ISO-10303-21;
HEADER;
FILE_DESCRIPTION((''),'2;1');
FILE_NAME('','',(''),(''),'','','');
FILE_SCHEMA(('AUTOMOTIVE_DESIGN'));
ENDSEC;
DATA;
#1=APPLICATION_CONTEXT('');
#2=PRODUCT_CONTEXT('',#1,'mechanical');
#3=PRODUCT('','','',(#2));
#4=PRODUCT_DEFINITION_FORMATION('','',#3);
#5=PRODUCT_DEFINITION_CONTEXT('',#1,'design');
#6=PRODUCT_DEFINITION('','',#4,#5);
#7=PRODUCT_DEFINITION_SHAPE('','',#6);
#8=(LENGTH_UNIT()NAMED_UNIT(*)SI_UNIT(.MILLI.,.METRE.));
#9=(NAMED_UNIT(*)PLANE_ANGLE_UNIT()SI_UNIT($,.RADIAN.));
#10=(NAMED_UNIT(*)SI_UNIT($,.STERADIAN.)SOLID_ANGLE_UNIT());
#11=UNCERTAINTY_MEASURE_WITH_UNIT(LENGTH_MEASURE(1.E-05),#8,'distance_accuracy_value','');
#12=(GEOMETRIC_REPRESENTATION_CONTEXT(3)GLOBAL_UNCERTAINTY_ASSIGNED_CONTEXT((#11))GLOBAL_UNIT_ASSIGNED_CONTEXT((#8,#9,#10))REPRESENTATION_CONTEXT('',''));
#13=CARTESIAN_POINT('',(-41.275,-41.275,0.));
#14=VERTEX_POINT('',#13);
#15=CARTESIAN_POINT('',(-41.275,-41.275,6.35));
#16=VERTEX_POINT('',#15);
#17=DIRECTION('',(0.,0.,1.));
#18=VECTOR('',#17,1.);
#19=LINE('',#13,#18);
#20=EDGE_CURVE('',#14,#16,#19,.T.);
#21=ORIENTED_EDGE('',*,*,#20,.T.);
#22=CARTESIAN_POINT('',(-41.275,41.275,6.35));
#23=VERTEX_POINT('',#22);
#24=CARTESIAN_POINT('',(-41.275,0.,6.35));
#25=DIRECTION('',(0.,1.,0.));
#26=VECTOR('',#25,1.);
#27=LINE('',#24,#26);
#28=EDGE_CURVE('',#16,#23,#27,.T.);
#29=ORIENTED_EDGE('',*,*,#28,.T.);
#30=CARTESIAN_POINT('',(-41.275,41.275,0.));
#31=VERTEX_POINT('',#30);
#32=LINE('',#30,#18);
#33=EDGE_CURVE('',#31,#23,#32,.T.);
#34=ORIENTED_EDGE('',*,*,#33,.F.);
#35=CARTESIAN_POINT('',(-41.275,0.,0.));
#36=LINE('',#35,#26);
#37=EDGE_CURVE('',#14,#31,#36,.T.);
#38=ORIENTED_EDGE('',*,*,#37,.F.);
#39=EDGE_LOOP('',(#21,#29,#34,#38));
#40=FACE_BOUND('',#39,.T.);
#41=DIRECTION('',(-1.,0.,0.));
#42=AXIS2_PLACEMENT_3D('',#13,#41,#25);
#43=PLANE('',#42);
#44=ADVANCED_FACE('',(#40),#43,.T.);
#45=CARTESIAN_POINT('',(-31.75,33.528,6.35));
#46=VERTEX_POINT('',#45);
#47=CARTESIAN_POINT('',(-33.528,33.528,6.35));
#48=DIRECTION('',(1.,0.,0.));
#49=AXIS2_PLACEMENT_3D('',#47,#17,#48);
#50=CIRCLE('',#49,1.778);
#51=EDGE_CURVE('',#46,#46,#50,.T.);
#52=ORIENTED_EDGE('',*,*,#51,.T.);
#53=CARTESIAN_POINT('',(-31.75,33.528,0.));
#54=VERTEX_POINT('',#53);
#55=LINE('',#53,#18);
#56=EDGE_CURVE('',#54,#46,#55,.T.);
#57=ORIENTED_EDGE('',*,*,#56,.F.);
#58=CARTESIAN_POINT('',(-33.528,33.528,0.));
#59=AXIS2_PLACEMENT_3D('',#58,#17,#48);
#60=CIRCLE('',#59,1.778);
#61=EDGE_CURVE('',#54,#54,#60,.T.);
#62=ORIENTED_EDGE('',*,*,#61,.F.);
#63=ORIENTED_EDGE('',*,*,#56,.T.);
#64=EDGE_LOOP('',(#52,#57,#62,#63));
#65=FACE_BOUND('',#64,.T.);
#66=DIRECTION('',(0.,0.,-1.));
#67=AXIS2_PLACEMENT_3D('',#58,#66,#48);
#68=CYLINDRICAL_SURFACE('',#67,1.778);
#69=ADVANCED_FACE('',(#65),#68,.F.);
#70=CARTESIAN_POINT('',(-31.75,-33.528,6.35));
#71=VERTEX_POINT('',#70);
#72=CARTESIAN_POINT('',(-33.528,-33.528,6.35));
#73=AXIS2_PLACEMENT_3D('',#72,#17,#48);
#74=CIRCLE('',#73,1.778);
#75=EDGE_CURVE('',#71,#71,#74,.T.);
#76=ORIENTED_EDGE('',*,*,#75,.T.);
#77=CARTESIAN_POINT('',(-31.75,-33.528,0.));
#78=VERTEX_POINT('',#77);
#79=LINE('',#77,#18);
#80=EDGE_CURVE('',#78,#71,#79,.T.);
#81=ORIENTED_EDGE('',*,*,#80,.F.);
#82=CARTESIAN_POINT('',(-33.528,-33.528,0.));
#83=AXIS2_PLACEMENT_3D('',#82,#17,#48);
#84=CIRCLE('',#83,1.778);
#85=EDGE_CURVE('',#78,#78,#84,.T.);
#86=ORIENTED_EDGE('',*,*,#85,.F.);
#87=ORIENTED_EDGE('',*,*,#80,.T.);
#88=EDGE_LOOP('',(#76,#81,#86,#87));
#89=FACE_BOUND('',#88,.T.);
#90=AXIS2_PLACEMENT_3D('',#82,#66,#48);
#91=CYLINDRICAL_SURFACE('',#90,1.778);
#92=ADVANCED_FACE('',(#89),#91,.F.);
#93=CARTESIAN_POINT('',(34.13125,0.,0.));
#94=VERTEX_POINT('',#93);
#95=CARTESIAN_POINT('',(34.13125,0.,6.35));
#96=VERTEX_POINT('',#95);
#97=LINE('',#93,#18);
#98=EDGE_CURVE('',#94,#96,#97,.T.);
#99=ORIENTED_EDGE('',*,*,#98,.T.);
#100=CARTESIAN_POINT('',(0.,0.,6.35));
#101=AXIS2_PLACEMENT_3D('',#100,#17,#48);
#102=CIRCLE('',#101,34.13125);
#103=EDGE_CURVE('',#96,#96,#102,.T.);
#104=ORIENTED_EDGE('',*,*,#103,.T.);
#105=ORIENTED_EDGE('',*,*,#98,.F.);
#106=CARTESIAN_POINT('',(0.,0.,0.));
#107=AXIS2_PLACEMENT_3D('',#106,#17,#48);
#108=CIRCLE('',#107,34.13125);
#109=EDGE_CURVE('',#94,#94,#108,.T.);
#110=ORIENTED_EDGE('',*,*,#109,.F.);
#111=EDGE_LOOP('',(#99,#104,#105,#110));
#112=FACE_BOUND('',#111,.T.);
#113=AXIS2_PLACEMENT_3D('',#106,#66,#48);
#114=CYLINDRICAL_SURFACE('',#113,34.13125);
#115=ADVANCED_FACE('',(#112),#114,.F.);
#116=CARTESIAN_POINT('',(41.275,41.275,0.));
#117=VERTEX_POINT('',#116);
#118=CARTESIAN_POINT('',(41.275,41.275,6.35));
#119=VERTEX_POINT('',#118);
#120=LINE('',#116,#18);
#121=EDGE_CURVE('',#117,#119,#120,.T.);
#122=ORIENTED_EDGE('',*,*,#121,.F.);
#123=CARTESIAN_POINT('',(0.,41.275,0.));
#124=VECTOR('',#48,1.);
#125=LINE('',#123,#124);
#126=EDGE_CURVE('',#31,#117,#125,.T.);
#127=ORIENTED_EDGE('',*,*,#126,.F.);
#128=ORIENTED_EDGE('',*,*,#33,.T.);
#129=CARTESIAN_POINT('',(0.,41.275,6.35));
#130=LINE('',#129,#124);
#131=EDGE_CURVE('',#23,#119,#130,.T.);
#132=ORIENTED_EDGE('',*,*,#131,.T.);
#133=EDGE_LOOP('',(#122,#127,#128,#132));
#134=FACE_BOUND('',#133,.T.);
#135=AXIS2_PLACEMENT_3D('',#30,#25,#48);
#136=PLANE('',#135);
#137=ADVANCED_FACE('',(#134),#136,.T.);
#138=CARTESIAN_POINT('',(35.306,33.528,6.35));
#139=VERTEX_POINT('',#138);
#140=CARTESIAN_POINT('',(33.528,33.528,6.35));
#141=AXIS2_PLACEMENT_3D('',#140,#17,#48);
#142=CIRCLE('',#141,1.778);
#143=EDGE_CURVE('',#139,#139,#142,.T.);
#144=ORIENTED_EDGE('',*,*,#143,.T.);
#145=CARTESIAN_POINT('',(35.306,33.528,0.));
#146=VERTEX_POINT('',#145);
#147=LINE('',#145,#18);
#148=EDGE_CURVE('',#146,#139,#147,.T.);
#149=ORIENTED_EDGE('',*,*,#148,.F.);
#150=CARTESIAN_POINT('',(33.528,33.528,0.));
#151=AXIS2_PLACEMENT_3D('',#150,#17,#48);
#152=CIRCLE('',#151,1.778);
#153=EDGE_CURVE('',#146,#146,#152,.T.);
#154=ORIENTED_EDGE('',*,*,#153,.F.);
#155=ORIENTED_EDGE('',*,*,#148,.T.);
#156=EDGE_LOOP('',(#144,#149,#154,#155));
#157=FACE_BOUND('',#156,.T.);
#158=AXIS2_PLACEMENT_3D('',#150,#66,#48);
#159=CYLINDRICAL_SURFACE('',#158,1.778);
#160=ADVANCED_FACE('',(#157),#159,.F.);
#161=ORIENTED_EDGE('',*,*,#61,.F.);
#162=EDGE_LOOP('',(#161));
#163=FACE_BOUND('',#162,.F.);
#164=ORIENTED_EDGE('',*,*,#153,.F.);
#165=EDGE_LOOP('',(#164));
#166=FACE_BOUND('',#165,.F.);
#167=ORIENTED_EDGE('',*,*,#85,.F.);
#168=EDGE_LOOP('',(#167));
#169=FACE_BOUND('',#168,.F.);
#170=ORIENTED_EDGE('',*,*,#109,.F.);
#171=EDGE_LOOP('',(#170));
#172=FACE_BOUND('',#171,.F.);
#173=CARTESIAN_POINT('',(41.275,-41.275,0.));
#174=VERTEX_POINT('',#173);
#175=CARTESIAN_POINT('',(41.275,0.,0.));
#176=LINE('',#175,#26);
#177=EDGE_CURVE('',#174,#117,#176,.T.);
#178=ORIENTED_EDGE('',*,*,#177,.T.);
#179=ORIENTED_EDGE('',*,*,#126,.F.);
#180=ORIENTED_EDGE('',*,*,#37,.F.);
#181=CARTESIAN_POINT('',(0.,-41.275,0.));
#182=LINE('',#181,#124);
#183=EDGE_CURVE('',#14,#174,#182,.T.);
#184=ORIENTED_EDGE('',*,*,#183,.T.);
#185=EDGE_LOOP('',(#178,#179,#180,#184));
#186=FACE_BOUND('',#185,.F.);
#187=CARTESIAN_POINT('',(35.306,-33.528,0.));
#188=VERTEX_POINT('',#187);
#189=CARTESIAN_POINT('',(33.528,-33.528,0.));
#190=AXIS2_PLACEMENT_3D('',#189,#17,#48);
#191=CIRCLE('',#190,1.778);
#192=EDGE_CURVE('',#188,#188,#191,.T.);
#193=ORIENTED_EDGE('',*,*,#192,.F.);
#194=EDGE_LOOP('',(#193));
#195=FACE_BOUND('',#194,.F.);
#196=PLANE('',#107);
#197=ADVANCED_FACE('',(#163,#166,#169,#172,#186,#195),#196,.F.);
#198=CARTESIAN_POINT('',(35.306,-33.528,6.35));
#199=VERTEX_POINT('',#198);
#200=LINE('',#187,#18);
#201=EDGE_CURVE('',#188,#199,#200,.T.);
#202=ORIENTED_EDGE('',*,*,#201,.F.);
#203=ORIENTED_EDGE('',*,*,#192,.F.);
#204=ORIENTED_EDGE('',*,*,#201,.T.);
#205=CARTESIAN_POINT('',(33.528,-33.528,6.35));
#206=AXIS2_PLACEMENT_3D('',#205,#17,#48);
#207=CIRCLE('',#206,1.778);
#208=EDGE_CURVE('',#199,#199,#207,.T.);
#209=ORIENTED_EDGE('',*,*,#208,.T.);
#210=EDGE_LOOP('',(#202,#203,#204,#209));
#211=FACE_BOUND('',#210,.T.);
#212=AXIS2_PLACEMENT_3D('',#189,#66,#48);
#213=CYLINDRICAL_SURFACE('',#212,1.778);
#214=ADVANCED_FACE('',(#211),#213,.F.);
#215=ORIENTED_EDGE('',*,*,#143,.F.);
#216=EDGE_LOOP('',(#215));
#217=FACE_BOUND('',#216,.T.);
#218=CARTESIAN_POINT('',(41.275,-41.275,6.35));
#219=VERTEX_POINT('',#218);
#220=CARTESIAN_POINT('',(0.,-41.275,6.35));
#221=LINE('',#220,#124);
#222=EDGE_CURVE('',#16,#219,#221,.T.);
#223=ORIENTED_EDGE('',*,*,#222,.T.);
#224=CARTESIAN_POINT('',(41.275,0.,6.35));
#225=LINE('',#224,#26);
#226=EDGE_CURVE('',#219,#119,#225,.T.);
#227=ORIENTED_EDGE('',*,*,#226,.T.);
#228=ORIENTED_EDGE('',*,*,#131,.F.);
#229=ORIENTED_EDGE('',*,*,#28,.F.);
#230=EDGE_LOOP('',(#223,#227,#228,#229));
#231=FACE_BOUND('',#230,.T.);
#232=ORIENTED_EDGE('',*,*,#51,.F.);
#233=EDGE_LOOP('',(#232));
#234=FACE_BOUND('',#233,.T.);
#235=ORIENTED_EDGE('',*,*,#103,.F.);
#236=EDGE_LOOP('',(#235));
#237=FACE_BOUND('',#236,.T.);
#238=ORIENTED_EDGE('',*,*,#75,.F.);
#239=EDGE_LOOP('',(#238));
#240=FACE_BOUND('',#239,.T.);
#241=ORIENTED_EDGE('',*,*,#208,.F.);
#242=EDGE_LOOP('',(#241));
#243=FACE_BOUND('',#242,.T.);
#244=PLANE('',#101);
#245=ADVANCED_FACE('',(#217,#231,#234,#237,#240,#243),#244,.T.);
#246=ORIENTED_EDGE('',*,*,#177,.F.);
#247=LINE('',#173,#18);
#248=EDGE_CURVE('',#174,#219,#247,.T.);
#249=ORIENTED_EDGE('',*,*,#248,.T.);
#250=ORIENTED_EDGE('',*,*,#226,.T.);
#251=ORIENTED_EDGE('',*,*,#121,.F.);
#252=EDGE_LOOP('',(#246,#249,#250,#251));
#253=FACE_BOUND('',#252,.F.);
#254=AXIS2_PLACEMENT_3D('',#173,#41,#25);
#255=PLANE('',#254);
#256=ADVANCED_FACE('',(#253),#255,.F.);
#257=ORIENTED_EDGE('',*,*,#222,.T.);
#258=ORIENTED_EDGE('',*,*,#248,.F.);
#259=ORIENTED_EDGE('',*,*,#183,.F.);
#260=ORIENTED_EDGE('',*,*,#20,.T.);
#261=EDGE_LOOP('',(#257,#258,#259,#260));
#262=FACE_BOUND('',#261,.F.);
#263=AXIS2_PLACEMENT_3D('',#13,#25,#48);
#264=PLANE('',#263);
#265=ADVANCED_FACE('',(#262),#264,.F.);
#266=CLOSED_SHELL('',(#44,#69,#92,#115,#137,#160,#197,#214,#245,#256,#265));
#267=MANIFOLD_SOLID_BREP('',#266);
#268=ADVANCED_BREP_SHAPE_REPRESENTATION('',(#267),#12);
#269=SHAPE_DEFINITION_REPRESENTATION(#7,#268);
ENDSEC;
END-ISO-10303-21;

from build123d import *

# Parameters (mm, degrees)
F0_W     = 82.55
F0_H     = 82.55
F0_R     = 1.778
F0_R_2   = 34.13125
F1_DEPTH = 6.35


# Not quite as in the source:
# - a length typed as a fraction of an inch, garbled in the dataset ("3 / 203.2 mm" for 3/8 in), is restored


with BuildPart() as f1:
    # F0 (on Top) → F1 (new body)
    with BuildSketch(Plane.XY):
        Rectangle(F0_W, F0_H)
        with Locations((-33.528, -33.528)):
            Circle(F0_R, mode=Mode.SUBTRACT)
        with Locations((33.528, -33.528)):
            Circle(F0_R, mode=Mode.SUBTRACT)
        with Locations((-33.528, 33.528)):
            Circle(F0_R, mode=Mode.SUBTRACT)
        Circle(F0_R_2, mode=Mode.SUBTRACT)
        with Locations((33.528, 33.528)):
            Circle(F0_R, mode=Mode.SUBTRACT)
    extrude(amount=F1_DEPTH)


solid = f1.part
